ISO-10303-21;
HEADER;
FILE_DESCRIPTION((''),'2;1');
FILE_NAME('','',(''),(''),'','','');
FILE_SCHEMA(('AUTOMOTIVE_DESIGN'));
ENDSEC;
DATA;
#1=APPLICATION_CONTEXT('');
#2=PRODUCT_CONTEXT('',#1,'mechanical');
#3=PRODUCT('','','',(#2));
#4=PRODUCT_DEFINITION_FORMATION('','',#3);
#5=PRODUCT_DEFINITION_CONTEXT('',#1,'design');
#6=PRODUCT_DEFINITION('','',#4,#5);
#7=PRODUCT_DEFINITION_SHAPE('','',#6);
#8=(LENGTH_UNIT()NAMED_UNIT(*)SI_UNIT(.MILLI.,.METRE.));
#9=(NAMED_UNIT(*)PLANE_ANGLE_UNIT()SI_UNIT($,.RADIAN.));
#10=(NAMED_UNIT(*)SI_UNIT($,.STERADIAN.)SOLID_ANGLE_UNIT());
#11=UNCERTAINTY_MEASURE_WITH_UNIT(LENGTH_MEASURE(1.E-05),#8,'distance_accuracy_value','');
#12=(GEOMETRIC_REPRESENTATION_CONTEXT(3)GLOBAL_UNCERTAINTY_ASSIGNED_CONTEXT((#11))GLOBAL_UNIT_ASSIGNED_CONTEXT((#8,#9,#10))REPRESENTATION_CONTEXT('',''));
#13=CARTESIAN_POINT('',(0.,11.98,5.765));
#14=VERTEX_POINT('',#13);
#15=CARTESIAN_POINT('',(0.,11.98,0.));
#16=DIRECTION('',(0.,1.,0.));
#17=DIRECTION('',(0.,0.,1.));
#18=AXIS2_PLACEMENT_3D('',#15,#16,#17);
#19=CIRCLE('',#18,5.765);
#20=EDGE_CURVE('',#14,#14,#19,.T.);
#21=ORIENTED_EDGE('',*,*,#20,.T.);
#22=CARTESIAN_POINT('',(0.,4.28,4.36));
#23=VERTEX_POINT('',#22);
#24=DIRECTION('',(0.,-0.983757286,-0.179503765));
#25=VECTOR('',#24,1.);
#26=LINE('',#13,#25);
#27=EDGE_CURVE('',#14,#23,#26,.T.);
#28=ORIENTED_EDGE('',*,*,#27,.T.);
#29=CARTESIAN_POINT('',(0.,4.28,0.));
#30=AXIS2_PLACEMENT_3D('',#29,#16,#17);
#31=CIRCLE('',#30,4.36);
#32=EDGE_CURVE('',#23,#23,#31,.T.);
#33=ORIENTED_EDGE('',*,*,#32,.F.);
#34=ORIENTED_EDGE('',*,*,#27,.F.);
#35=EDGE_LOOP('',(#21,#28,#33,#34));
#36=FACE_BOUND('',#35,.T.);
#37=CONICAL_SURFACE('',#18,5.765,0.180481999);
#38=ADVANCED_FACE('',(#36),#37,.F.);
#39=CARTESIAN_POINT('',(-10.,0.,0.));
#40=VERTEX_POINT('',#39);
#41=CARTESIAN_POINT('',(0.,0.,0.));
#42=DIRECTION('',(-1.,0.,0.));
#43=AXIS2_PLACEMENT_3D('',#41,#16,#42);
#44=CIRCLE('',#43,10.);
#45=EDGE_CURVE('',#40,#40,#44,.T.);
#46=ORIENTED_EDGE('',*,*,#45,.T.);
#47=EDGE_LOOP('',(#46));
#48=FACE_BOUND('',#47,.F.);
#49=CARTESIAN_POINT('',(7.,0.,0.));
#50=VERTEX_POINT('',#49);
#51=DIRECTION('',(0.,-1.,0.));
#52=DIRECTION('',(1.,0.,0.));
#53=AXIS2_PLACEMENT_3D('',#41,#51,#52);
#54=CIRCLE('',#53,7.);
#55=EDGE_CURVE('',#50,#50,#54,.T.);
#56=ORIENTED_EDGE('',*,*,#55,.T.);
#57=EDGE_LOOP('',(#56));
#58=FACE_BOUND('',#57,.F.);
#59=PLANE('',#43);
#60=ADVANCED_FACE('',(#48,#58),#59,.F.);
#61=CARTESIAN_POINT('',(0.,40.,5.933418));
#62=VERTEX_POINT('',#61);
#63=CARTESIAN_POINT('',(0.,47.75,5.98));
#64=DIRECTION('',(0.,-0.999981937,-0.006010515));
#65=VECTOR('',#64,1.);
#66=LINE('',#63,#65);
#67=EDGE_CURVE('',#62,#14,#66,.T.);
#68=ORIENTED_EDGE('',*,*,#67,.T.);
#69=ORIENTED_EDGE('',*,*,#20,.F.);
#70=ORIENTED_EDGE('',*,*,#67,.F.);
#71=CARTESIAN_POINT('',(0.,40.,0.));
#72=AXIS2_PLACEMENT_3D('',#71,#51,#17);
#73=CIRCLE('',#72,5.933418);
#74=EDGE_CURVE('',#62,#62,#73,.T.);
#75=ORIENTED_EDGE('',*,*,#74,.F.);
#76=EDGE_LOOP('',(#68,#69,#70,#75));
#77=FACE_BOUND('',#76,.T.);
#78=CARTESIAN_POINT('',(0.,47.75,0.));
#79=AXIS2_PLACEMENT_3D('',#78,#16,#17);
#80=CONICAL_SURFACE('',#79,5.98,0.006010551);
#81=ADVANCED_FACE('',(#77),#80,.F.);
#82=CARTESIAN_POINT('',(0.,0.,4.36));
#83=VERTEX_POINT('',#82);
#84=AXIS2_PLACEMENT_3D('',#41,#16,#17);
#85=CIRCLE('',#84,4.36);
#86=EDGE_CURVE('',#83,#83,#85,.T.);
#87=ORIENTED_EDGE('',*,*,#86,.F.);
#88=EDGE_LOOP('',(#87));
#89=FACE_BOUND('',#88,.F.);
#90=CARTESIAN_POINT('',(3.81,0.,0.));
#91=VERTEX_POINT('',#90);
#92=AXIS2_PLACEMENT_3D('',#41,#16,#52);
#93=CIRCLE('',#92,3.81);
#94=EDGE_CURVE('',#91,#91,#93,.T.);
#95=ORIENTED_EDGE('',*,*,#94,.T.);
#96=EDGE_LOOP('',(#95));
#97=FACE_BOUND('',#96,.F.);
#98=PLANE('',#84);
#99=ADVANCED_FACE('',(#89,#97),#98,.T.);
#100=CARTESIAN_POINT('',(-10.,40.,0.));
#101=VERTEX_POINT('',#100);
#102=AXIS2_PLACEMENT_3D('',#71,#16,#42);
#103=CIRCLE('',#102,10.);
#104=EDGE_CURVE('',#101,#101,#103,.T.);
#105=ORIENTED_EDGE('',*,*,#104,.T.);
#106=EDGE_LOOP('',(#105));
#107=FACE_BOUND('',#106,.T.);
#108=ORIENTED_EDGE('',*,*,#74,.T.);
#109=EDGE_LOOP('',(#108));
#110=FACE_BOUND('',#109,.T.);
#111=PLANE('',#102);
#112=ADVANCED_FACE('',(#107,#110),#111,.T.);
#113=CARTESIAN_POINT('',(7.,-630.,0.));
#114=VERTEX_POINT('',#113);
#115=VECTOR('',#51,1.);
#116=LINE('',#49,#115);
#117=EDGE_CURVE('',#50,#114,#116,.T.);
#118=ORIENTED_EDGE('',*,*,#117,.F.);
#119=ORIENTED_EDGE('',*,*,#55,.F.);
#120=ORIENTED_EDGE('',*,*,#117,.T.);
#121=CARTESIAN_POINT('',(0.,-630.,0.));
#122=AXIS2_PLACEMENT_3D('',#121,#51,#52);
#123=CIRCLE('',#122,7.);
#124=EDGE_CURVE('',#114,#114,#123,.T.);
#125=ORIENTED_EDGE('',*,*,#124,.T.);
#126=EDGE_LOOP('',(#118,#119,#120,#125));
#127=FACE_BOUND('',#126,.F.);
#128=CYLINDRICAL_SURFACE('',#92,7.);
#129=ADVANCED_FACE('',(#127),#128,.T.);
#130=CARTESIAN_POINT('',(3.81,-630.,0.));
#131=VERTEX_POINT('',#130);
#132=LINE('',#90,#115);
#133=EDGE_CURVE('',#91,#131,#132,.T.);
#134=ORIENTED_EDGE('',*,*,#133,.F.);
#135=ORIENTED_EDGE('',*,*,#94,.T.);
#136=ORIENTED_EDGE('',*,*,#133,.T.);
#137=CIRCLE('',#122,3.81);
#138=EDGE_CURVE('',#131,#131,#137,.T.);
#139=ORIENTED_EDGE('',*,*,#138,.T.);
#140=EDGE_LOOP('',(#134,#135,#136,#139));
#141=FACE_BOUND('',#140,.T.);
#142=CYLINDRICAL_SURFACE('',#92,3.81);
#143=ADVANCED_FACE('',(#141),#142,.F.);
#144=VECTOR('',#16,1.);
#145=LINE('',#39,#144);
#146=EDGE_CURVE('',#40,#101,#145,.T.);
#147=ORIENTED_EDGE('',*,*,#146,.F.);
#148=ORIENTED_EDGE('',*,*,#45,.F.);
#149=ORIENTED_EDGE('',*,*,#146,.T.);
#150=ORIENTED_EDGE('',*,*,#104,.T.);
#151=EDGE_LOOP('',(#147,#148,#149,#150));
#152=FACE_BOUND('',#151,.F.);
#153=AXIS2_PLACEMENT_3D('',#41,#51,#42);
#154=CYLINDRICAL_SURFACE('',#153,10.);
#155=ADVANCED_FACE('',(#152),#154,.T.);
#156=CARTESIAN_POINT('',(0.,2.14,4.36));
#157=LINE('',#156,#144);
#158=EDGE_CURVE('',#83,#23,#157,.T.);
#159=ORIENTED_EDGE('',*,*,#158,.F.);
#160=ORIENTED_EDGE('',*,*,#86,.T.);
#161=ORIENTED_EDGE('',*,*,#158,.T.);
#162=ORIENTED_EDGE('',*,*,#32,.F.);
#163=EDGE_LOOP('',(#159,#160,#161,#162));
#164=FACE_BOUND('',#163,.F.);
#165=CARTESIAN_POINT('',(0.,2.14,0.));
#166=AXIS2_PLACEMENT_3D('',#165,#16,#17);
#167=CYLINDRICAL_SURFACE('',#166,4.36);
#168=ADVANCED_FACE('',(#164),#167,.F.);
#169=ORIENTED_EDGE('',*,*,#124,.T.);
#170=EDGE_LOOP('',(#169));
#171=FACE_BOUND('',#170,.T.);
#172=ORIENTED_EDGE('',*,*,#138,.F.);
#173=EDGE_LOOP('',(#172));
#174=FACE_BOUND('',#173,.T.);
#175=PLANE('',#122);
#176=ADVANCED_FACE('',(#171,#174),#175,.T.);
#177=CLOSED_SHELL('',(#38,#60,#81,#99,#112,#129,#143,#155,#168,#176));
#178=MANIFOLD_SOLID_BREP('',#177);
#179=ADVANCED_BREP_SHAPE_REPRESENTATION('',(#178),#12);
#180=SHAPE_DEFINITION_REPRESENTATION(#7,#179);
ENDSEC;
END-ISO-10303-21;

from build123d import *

# Parameters (mm, degrees)
F0_R     = 7
F0_R_2   = 3.81
F1_DEPTH = 630
F2_R     = 10
F2_R_2   = 7
F2_R_3   = 3.81
F3_DEPTH = 40
F4_W     = 4.28
F4_H     = 4.36


with BuildPart() as f1:
    # F0 (on Front) → F1 (new body)
    with BuildSketch(Plane.XZ):
        Circle(F0_R)
        Circle(F0_R_2, mode=Mode.SUBTRACT)
    extrude(amount=F1_DEPTH)

    # F2 (on face) → F3 (join)
    with BuildSketch(Plane(origin=(0, 0, 0), x_dir=(-1, 0, 0), z_dir=(0, 1, 0))):
        Circle(F2_R)
        Circle(F2_R_2, mode=Mode.SUBTRACT)
        Circle(F2_R_2)
        Circle(F2_R_3, mode=Mode.SUBTRACT)
    extrude(amount=F3_DEPTH)

    # F4 (on Right) → F5 (revolve, cut)
    with BuildSketch(Plane.YZ):
        with Locations((2.14, 2.18)):
            Rectangle(F4_W, F4_H)
        Polygon((4.28, 4.36), (4.28, 0), (11.98, 0), (11.98, 5.765), align=None)
        Polygon((11.98, 5.765), (11.98, 0), (47.75, 0), (47.75, 5.98), align=None)
    revolve(axis=Axis((0, 29.865, 0), (0, 1, 0)), mode=Mode.SUBTRACT)


solid = f1.part
